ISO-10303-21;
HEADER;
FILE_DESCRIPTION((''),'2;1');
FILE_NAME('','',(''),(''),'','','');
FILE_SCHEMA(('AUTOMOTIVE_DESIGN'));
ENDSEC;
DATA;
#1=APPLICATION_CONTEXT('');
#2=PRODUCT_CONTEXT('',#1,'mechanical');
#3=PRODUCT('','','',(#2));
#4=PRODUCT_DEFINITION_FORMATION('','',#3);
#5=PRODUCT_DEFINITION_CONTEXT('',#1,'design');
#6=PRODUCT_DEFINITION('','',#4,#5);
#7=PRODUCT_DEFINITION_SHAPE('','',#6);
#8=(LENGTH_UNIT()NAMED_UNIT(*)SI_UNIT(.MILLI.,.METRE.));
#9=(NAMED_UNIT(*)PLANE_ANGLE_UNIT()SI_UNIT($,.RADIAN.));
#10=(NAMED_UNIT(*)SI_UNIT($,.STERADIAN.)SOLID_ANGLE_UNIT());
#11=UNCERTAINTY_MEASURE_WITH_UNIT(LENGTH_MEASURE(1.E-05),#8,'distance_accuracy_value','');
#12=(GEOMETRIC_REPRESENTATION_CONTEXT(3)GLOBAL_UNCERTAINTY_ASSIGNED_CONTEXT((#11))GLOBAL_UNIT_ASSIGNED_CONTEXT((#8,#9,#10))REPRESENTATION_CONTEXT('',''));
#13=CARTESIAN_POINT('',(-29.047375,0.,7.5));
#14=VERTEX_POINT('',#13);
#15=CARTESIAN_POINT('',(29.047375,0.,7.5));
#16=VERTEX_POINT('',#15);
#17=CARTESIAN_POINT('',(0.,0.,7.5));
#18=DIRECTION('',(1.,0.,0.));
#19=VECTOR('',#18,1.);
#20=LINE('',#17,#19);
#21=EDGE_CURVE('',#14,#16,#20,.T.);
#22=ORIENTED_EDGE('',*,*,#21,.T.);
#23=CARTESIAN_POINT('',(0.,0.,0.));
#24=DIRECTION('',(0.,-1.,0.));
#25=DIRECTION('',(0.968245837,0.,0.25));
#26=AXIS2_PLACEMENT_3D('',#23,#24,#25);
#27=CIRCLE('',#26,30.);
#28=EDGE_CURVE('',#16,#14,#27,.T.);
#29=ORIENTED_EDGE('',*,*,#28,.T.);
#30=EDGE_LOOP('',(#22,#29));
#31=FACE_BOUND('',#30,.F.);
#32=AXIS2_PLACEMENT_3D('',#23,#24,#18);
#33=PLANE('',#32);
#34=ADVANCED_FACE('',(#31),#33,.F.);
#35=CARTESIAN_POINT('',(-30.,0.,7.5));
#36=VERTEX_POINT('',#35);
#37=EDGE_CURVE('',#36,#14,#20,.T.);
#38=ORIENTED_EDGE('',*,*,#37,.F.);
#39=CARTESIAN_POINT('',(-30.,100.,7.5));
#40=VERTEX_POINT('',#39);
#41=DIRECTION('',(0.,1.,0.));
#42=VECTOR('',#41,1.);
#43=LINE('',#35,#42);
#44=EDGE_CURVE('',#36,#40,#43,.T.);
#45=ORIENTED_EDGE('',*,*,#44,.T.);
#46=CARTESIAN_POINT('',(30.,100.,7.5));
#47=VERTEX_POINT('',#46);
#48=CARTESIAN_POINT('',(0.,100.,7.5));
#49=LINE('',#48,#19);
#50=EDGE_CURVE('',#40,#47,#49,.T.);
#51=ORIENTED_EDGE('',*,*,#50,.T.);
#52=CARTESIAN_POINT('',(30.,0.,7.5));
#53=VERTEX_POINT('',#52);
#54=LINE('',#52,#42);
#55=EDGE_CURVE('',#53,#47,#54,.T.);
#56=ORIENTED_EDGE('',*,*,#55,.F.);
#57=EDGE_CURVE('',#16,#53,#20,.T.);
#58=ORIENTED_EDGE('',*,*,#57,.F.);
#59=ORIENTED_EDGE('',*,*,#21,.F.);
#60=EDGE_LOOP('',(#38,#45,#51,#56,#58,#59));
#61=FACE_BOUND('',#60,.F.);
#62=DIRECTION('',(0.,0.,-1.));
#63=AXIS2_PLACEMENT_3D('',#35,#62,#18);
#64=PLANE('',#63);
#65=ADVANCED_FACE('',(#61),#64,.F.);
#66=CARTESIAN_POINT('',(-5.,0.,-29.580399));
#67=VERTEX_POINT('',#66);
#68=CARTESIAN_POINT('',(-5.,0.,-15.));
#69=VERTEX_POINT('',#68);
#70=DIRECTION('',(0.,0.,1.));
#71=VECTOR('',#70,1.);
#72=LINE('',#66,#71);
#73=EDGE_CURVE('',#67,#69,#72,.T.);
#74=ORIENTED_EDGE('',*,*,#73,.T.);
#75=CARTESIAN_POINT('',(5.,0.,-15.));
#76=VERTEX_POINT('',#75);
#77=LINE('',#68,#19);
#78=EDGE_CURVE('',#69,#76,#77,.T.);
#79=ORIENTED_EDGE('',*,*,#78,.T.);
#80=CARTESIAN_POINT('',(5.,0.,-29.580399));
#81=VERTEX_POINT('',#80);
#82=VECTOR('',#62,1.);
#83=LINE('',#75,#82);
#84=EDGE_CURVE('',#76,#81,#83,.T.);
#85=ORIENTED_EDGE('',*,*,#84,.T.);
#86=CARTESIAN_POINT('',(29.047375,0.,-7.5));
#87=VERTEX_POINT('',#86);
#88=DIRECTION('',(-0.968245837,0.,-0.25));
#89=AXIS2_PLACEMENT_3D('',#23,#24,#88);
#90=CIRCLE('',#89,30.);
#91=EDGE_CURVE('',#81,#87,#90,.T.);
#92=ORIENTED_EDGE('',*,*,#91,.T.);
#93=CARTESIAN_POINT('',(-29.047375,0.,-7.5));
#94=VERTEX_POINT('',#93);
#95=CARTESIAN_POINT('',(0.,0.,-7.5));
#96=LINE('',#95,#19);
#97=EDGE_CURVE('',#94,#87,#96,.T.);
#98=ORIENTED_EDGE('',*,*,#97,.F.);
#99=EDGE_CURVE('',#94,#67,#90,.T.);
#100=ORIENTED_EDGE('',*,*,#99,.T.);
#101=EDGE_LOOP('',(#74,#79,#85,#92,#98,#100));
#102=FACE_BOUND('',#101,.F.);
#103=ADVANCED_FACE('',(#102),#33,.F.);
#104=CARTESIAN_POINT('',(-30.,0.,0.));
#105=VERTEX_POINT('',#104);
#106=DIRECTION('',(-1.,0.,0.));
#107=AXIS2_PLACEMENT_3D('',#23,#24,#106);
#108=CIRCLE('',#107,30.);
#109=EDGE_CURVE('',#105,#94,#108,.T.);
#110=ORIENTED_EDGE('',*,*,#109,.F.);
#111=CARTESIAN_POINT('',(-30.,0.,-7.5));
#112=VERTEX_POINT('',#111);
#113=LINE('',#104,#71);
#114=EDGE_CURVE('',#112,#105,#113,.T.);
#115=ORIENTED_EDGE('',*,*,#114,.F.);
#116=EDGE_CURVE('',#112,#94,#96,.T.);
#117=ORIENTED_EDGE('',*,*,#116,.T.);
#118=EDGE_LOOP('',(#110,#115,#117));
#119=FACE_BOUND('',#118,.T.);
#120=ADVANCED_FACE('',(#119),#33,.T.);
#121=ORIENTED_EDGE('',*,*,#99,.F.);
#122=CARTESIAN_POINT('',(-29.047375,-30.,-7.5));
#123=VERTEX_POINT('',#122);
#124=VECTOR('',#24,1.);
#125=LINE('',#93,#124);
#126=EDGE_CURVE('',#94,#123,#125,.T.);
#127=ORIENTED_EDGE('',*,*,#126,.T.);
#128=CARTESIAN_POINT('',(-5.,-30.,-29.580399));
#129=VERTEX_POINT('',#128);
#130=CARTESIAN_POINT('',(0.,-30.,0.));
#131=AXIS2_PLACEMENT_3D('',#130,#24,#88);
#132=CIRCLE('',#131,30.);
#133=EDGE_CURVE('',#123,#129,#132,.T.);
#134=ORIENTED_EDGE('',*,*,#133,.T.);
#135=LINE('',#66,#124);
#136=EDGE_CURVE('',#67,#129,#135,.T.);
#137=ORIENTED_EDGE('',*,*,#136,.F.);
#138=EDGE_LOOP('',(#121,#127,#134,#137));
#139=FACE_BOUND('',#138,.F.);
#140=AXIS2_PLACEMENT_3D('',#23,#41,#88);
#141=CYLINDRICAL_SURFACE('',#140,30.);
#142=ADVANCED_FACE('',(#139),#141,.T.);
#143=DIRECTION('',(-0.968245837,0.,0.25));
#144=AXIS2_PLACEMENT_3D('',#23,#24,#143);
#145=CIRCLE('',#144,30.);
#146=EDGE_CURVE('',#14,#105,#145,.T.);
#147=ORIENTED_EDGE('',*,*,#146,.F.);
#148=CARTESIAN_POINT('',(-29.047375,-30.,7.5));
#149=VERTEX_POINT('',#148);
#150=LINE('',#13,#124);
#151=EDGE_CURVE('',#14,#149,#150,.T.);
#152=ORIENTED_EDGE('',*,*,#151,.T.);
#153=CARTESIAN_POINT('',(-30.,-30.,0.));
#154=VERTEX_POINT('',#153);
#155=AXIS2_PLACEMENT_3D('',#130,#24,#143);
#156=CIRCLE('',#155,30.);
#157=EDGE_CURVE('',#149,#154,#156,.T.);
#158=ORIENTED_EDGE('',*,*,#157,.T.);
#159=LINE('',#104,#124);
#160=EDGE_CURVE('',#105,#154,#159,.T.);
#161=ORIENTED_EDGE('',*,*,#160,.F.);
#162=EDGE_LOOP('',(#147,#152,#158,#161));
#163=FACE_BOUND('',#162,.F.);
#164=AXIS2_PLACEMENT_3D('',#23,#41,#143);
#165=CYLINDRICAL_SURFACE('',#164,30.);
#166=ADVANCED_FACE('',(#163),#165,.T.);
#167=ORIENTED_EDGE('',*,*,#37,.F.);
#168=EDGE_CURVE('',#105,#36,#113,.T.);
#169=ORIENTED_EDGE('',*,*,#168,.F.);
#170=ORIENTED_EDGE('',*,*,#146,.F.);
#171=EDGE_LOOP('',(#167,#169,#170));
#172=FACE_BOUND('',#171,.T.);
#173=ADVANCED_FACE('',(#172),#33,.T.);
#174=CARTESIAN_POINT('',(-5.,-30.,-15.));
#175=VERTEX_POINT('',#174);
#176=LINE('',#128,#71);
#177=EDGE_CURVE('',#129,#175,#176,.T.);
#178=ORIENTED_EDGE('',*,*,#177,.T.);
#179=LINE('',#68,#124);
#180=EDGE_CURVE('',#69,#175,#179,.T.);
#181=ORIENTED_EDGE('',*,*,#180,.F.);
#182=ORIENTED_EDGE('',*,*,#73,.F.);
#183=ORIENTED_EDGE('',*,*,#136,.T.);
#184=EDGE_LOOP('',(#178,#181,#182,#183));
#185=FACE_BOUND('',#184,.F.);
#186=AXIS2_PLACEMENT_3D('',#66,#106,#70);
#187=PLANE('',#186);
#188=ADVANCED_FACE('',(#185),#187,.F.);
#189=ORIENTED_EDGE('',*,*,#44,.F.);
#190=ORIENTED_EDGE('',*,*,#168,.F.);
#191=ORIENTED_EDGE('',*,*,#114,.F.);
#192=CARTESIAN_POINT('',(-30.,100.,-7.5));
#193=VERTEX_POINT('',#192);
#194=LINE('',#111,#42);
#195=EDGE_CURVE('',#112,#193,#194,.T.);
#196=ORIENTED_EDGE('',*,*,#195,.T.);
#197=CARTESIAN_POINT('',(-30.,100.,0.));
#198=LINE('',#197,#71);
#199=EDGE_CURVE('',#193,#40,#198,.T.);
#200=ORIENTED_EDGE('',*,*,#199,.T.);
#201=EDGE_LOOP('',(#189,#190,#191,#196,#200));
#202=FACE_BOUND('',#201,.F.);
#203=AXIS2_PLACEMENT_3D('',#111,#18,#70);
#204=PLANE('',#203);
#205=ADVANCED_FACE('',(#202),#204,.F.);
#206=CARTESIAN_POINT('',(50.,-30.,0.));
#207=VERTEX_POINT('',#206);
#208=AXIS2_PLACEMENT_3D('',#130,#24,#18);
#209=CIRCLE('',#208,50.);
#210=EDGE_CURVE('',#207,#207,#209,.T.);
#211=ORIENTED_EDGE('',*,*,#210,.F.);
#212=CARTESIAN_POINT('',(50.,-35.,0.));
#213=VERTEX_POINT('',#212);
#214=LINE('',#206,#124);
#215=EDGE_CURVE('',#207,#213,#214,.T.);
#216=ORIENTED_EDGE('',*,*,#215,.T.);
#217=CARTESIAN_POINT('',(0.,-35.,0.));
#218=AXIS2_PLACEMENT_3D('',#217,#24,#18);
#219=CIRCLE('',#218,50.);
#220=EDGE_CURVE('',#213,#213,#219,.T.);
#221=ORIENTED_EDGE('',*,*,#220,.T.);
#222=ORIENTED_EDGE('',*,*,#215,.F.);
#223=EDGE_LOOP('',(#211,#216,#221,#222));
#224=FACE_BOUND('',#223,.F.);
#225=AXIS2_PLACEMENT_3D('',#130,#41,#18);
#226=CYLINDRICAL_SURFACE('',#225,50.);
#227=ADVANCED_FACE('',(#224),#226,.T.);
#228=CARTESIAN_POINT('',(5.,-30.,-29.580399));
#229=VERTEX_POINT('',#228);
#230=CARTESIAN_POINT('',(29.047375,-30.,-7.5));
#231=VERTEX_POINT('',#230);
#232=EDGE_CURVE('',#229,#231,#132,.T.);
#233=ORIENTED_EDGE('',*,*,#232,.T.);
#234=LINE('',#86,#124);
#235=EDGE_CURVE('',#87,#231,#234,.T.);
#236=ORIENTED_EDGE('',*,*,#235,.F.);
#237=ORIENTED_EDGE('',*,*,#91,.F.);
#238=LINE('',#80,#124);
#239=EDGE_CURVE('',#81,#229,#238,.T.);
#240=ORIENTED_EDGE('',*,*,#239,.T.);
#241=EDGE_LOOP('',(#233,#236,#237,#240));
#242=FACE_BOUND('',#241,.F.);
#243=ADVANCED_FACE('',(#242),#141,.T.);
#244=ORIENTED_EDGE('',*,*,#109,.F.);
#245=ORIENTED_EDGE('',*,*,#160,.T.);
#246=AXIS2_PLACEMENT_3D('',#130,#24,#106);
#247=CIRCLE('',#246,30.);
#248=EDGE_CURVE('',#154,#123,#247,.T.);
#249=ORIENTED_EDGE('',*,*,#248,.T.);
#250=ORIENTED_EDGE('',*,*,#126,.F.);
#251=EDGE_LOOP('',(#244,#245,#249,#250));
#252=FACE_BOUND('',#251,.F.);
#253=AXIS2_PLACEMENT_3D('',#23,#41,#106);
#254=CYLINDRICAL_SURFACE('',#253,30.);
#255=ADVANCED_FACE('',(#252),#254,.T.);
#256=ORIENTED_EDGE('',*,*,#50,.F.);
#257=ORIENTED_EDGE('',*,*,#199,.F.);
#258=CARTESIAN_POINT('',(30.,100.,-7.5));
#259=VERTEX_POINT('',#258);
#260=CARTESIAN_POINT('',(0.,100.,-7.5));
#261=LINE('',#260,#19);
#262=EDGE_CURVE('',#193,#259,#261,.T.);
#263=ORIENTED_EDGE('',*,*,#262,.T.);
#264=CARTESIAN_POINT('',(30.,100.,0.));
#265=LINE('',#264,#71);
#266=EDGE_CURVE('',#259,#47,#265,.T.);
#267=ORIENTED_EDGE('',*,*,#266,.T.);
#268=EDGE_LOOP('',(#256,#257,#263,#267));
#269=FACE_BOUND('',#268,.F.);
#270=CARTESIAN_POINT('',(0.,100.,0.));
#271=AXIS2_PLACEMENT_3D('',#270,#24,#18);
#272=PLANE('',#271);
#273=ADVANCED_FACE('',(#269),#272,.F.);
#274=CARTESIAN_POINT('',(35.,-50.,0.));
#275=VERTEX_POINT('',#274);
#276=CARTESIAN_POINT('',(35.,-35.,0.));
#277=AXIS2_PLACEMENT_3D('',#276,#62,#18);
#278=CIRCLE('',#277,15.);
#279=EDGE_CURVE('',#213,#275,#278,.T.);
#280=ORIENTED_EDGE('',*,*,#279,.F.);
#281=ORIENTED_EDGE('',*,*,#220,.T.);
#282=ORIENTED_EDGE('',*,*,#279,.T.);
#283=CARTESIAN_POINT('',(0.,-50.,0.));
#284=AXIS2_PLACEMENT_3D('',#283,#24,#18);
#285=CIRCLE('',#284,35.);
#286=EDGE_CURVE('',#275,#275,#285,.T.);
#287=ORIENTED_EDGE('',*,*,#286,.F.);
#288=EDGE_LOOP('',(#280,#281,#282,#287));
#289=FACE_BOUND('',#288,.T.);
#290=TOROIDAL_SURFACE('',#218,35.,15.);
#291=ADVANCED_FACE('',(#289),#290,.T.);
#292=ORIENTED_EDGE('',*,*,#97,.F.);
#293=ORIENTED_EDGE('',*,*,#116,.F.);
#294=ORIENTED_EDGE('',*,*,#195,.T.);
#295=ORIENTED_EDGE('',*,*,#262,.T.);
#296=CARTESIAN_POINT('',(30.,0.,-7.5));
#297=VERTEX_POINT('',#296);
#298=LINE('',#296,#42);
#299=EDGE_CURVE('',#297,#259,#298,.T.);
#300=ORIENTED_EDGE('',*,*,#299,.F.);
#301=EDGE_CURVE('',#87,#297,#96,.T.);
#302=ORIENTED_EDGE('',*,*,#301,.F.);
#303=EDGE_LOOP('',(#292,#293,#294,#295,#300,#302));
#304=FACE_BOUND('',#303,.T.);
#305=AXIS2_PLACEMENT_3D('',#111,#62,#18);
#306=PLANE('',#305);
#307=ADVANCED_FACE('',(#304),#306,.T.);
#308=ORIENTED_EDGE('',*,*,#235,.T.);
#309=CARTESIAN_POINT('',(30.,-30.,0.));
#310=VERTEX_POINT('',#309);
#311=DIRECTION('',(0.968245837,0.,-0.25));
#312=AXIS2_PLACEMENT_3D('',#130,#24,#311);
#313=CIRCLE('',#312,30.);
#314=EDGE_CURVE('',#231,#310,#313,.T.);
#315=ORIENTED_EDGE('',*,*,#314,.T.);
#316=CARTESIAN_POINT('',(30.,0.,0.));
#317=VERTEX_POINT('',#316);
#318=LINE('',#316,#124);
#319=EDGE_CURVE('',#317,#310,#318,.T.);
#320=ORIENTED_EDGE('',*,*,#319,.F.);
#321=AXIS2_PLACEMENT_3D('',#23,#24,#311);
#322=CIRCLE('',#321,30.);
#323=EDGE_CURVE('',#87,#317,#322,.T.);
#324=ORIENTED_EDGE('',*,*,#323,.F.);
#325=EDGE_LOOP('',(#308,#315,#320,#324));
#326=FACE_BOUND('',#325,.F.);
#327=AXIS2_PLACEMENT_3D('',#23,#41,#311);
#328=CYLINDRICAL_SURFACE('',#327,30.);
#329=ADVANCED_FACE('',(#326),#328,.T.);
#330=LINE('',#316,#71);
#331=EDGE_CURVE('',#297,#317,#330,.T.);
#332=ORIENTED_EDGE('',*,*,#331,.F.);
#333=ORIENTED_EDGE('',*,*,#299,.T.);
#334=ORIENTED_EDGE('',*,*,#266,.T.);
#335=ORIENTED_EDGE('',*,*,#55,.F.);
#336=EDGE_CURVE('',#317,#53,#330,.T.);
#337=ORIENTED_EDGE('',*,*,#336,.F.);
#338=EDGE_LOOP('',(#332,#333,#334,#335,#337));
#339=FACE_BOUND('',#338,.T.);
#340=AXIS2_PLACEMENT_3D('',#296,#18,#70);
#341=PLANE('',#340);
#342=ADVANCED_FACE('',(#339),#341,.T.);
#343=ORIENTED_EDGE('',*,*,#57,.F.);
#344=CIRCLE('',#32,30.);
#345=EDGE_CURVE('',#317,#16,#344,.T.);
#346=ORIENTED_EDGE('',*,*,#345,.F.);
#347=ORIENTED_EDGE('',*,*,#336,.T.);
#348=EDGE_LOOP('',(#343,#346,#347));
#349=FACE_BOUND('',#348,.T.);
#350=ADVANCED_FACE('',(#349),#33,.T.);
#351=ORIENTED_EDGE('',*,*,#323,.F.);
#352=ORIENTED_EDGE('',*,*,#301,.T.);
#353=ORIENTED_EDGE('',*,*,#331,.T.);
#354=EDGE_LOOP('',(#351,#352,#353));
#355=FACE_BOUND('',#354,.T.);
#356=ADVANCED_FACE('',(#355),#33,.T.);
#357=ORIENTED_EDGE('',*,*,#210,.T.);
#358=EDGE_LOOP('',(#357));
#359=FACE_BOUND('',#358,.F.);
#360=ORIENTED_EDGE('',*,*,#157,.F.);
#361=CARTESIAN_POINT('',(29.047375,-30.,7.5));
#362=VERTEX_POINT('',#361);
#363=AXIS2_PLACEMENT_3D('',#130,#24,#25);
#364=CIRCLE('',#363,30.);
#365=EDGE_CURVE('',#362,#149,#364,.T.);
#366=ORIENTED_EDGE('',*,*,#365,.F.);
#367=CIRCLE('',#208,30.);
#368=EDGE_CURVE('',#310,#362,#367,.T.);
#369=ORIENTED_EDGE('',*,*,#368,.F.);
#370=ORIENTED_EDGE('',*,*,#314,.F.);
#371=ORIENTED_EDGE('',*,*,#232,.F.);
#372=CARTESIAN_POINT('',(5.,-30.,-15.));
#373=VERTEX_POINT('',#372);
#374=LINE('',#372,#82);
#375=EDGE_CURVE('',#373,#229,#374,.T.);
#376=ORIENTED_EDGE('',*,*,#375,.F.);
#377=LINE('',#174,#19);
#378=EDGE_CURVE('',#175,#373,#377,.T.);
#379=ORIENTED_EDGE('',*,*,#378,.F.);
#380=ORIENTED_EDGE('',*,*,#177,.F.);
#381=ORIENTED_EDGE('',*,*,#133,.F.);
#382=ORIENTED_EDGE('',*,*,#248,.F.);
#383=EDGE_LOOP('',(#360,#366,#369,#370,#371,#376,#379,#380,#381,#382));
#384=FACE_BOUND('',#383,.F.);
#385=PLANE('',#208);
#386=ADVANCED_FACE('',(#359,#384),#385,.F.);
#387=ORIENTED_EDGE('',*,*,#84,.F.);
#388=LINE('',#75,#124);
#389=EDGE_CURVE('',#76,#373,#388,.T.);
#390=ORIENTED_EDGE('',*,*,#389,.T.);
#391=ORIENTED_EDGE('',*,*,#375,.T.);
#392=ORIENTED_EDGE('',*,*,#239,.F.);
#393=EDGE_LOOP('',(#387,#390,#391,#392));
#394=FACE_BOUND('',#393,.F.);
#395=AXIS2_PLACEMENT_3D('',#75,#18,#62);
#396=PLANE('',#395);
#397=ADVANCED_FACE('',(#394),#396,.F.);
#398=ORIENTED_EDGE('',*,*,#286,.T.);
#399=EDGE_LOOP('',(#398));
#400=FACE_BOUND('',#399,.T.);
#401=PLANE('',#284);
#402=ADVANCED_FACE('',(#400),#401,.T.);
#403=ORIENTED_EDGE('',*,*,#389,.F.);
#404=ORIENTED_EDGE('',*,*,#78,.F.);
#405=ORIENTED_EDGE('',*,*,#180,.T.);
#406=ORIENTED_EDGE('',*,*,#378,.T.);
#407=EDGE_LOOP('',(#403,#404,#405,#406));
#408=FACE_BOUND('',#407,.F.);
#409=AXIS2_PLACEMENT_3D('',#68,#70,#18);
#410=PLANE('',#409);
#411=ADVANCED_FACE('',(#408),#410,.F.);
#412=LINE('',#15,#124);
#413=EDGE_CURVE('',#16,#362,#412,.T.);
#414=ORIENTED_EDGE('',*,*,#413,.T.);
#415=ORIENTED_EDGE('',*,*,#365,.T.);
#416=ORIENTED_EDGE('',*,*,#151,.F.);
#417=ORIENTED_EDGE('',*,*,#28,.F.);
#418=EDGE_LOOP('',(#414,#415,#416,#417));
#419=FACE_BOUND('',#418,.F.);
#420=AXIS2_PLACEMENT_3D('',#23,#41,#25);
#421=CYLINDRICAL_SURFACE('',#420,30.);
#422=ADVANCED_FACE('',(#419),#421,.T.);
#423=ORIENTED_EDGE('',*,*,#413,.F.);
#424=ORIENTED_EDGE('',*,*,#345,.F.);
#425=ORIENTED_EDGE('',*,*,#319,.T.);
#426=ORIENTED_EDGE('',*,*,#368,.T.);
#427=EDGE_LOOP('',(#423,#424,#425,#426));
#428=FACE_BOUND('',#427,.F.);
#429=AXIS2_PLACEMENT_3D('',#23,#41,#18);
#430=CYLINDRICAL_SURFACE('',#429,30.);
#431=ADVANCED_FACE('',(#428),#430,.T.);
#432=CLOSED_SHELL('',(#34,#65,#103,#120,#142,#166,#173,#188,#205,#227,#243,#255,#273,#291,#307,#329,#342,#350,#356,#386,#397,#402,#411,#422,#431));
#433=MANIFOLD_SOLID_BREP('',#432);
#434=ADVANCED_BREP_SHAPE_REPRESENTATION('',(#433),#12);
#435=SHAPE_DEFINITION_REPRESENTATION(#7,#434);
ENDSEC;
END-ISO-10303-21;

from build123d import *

# Parameters (mm, degrees)
F0_W     = 60
F0_H     = 15
F1_DEPTH = 100
F3_DEPTH = 30
F4_R     = 50
F4_R_2   = 30
F5_DEPTH = 20
F6_R     = 15
F8_DEPTH = 30


# Not quite as in the source:
# - a feature names something its author has since deleted; it is built from what else it names


with BuildPart() as f1:
    # F0 (on Front) → F1 (new body)
    with BuildSketch(Plane.XZ):
        Rectangle(F0_W, F0_H)
    extrude(amount=-F1_DEPTH)

    # F2 (on face) → F3 (join)
    with BuildSketch(Plane.XZ):
        with BuildLine():
            ThreePointArc((29.0473750966, -7.5), (29.760890888, -3.7801287745), (30, 0))
            ThreePointArc((30, 0), (29.760890888, 3.7801287745), (29.0473750966, 7.5))
            Line((29.0473750966, 7.5), (-29.0473750966, 7.5))
            ThreePointArc((-29.0473750966, 7.5), (-29.760890888, 3.7801287745), (-30, 0))
            ThreePointArc((-30, 0), (-29.760890888, -3.7801287745), (-29.0473750966, -7.5))
            Line((-29.0473750966, -7.5), (29.0473750966, -7.5))
        make_face()
        with BuildLine():
            Line((-29.0473750966, 7.5), (29.0473750966, 7.5))
            ThreePointArc((29.0473750966, 7.5), (0, 30), (-29.0473750966, 7.5))
        make_face()
        with BuildLine():
            ThreePointArc((-29.0473750966, -7.5), (0, -30), (29.0473750966, -7.5))
            Line((29.0473750966, -7.5), (-29.0473750966, -7.5))
        make_face()
    extrude(amount=F3_DEPTH)

    # F4 (on face) → F5 (join)
    with BuildSketch(Plane.XZ.offset(30)):
        Circle(F4_R)
        Circle(F4_R_2, mode=Mode.SUBTRACT)
        Circle(F4_R_2)
    extrude(amount=F5_DEPTH)

    # F6
    f6_edges = [f1.edges().sort_by_distance(p)[0] for p in [
        (-50, -50, 0),
    ]]
    fillet(f6_edges, radius=F6_R)

    # F7 (on face) → F8 (cut)
    with BuildSketch(Plane(origin=(0, 0, 0), x_dir=(-1, 0, 0), z_dir=(0, 1, 0))):
        with BuildLine():
            Line((5, -15), (-5, -15))
            Line((-5, -15), (-5, -29.5803989155))
            ThreePointArc((-5, -29.5803989155), (0, -30), (5, -29.5803989155))
            Line((5, -29.5803989155), (5, -15))
        make_face()
    extrude(amount=-F8_DEPTH, mode=Mode.SUBTRACT)


solid = f1.part
